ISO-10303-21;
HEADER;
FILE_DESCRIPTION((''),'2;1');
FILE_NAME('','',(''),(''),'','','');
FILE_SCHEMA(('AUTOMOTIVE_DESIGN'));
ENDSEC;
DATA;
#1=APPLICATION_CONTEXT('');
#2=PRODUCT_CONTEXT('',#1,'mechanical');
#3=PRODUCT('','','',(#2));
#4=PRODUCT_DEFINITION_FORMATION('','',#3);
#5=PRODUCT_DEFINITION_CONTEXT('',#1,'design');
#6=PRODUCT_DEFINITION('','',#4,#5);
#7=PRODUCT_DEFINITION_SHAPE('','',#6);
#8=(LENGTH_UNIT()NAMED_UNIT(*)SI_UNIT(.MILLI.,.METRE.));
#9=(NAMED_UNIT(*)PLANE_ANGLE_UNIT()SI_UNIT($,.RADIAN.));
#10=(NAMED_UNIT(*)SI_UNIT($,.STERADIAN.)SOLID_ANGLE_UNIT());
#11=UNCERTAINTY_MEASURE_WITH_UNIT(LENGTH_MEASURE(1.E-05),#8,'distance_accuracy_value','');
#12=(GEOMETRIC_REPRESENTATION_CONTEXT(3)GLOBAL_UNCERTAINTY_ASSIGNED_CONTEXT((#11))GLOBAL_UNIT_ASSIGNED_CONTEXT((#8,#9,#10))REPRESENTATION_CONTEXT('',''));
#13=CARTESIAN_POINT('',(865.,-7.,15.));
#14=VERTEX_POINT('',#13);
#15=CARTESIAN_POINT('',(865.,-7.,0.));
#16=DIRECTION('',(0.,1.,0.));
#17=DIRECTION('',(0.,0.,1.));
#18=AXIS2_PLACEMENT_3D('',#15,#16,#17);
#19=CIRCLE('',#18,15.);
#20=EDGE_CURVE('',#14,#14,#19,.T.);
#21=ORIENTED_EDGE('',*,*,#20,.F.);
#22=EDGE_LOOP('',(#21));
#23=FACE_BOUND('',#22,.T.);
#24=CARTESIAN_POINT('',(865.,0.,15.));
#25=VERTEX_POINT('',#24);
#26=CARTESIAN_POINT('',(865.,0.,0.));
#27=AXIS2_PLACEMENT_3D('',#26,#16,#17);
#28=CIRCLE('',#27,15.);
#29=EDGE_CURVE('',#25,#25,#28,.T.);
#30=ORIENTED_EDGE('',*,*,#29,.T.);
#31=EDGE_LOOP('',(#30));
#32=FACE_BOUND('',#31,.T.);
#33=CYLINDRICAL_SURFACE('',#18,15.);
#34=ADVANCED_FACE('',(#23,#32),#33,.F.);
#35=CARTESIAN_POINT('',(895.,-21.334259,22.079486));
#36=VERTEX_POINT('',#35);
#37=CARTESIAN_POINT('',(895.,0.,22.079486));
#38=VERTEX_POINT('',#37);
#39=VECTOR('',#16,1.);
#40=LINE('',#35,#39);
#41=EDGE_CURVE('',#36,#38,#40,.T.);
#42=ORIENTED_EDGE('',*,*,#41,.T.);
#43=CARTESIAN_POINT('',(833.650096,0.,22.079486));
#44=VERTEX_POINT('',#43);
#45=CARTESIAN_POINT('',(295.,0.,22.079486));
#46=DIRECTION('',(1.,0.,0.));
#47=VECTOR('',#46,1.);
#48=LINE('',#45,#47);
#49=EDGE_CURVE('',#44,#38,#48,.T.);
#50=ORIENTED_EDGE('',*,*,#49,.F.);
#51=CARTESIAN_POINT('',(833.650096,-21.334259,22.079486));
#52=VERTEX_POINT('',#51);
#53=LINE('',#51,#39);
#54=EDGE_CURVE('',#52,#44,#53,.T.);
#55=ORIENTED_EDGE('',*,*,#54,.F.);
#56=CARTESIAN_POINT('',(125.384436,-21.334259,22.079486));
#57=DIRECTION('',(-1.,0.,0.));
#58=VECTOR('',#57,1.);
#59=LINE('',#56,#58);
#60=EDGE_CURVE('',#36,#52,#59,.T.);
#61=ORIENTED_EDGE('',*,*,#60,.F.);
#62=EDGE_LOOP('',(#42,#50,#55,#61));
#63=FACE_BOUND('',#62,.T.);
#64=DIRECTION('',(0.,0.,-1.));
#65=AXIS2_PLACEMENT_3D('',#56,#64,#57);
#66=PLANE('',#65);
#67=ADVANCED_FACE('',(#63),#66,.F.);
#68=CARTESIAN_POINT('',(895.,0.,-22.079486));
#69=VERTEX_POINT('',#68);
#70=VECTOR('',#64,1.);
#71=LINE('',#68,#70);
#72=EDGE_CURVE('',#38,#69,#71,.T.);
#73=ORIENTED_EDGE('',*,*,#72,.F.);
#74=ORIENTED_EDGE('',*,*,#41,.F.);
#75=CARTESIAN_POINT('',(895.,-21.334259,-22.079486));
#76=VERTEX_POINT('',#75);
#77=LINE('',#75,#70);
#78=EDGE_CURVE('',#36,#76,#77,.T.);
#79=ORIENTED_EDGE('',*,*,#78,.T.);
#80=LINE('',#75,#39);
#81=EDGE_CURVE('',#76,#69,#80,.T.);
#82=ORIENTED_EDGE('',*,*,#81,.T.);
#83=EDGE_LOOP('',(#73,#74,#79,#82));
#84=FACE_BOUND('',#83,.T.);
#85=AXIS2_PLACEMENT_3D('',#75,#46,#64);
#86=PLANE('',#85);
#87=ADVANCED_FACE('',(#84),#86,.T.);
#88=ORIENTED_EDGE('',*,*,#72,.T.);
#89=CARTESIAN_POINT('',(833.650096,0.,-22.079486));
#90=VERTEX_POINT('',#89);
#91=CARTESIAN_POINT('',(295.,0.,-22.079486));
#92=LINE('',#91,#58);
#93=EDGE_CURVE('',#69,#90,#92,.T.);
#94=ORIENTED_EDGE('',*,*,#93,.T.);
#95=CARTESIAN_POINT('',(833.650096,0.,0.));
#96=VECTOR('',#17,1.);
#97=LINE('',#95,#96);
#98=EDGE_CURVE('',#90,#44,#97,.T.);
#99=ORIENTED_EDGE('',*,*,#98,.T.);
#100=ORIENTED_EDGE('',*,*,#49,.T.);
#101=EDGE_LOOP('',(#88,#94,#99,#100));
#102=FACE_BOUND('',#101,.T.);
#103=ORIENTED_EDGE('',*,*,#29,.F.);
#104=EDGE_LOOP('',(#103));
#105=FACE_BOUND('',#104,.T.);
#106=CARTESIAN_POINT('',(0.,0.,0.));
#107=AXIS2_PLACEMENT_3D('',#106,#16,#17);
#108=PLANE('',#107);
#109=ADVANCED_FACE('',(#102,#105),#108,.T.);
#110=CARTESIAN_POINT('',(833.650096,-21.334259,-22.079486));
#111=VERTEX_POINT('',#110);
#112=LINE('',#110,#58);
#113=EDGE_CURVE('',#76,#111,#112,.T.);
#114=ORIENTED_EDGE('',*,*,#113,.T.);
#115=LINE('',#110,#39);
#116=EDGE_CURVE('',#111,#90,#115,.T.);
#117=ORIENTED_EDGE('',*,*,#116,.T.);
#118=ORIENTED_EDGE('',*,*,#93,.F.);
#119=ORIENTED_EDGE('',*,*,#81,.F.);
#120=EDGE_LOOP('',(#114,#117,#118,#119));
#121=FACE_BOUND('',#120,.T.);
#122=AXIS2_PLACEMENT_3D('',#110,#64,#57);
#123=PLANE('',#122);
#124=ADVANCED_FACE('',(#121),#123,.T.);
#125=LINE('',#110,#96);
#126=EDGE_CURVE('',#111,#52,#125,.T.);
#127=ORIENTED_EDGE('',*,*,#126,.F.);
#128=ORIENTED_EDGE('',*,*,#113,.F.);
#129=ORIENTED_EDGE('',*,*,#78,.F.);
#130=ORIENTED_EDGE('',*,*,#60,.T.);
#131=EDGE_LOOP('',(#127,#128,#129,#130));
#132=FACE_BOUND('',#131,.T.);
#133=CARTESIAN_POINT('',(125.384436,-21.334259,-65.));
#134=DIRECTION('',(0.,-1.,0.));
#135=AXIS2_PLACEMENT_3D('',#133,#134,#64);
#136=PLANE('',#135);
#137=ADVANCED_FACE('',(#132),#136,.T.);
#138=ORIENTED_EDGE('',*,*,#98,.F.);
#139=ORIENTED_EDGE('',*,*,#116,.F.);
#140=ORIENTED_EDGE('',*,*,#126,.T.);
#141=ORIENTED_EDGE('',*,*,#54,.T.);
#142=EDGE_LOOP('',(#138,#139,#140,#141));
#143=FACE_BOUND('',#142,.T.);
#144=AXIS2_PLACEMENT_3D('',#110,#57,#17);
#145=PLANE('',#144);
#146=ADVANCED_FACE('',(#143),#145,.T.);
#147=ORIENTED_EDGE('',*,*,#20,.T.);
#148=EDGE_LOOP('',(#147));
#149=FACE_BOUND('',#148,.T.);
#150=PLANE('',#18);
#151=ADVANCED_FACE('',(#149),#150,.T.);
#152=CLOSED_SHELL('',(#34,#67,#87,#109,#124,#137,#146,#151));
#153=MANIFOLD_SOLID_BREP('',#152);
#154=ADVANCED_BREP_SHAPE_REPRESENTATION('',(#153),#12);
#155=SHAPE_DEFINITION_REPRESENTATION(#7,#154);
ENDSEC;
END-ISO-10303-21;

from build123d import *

# Parameters (mm, degrees)
CUT_EXTRUDE7_DEPTH               = 1010.950493836
CUT_EXTRUDE7_DEPTH_BACK          = 1010.950493836
SKETCH13_W                       = 48.176434887
SKETCH13_H                       = 155.804640487
SKETCH4_W                        = 600
SKETCH4_H                        = 44.158972604
CUT_EXTRUDE2_DEPTH               = 1010.950493836
SKETCH7_W                        = 159.807953253
SKETCH7_H                        = 69.49104999
BOSS_EXTRUDE7_DEPTH              = 5
FILLET5_R                        = 10
F_5_8_0_625_DIAMETER_HOLE1_D     = 15.875
F_5_8_0_625_DIAMETER_HOLE1_DEPTH = 30
F_5_8_0_625_DIAMETER_HOLE1_TIP   = 4.769331164
BOSS_EXTRUDE8_DEPTH              = 10
BOSS_EXTRUDE8_DEPTH_BACK         = 10
SKETCH16_W                       = 57.403477863
SKETCH16_H                       = 23.203595883
SKETCH17_W                       = 38.256761469
SKETCH17_H                       = 12.64819079
BOSS_EXTRUDE9_DEPTH              = 10
SKETCH18_W                       = 120
SKETCH18_H                       = 104.74536306
CUT_EXTRUDE8_DEPTH               = 161
FILLET6_R                        = 10
SKETCH19_R                       = 15
CUT_EXTRUDE9_DEPTH               = 7
CUT_EXTRUDE11_DEPTH              = 1010.950493856
CUT_EXTRUDE11_DEPTH_BACK         = 1010.950493856
SKETCH22_W                       = 1481.455902665
SKETCH22_H                       = 524.99926461
SKETCH22_W_2                     = 774.615564444
SKETCH22_H_2                     = 130
SKETCH23_W                       = 1033.221047575
SKETCH23_H                       = 313.410359552
SKETCH23_W_2                     = 790.959514037
SKETCH23_H_2                     = 163.499719248
CUT_EXTRUDE12_DEPTH              = 915.822387207
CUT_EXTRUDE13_DEPTH              = 908.868382599
CUT_EXTRUDE13_DEPTH_BACK         = 908.868382599
SKETCH24_W                       = 774.615564444
SKETCH24_H                       = 42.920513698
CUT_EXTRUDE14_DEPTH              = 908.868382607
CUT_EXTRUDE14_DEPTH_BACK         = 908.868382607
SKETCH25_W                       = 913.785959768
SKETCH25_H                       = 329.26502352
SKETCH25_W_2                     = 61.349903791
SKETCH25_H_2                     = 44.158972604


# Read off the part's stored shape, not the designer's step: Revolve1
with BuildPart() as part:
    # Revolve1 outline → Revolve1 (revolve)
    with BuildSketch(Plane.YX):
        with BuildLine():
            Line((0, 1000), (0, 0))
            ThreePointArc((0, 0), (70.710678154, 29.289321917), (100, 100.0000001))
            Line((100, 100.0000001), (100, 899.9999999))
            ThreePointArc((100, 899.9999999), (70.710678154, 970.710678083), (0, 1000))
        make_face()
    revolve(axis=Axis((0, 0, 0), (1, 0, 0)))

    # Sketch13 → Cut-Extrude7 (cut, two sides: drawn at the far end of the back side and taken through both)
    with BuildSketch(Plane(origin=(0, 0, 0), x_dir=(1, 0, 0), z_dir=(0, 1, 0)).offset(-CUT_EXTRUDE7_DEPTH_BACK)):
        with Locations((5.911782557, -3.075091589)):
            Rectangle(SKETCH13_W, SKETCH13_H)
    extrude(amount=CUT_EXTRUDE7_DEPTH + CUT_EXTRUDE7_DEPTH_BACK, mode=Mode.SUBTRACT)

    # Sketch4 → Cut-Extrude2 (cut, through all)
    with BuildSketch(Plane(origin=(0, 0, 0), x_dir=(1, 0, 0), z_dir=(0, 1, 0))):
        with Locations((595, 0)):
            Rectangle(SKETCH4_W, SKETCH4_H)
    extrude(amount=CUT_EXTRUDE2_DEPTH, mode=Mode.SUBTRACT)

    # Sketch7 → Boss-Extrude7 (add)
    with BuildSketch(Plane(origin=(0, 0, 0), x_dir=(1, 0, 0), z_dir=(0, 1, 0))):
        with Locations((745.885521462, -1.405844332)):
            Rectangle(SKETCH7_W, SKETCH7_H)
    extrude(amount=-BOSS_EXTRUDE7_DEPTH)

    # Fillet5
    fillet5_edges = [part.edges().sort_by_distance(p)[0] for p in [
        (30, -71.414284286, 0),
    ]]
    fillet(fillet5_edges, radius=FILLET5_R)

    # 5/8 (0.625) Diameter Hole1
    with Locations(Plane.ZY.offset(-30)):
        with Locations((0, 0)):
            Hole(F_5_8_0_625_DIAMETER_HOLE1_D / 2, depth=F_5_8_0_625_DIAMETER_HOLE1_DEPTH)
            with Locations((0, 0, -(F_5_8_0_625_DIAMETER_HOLE1_DEPTH + F_5_8_0_625_DIAMETER_HOLE1_TIP / 2))):  # 118° drill point
                Cone(0, F_5_8_0_625_DIAMETER_HOLE1_D / 2, F_5_8_0_625_DIAMETER_HOLE1_TIP, mode=Mode.SUBTRACT)

    # Sketch16 → Boss-Extrude8 (add, two sides: drawn at the far end of the back side and taken through both)
    with BuildSketch(Plane.XY.offset(-BOSS_EXTRUDE8_DEPTH_BACK)):
        with Locations((738.294537666, -11.601797942)):
            Rectangle(SKETCH16_W, SKETCH16_H)
    extrude(amount=BOSS_EXTRUDE8_DEPTH + BOSS_EXTRUDE8_DEPTH_BACK)

    # Sketch17 → Boss-Extrude9 (add)
    with BuildSketch(Plane.XY.offset(-22.079486302)):
        with Locations((787.071835847, 6.324095395)):
            Rectangle(SKETCH17_W, SKETCH17_H)
    extrude(amount=-BOSS_EXTRUDE9_DEPTH)

    # Sketch18 → Cut-Extrude8 (cut)
    with BuildSketch(Plane(origin=(0, 0, 0), x_dir=(1, 0, 0), z_dir=(0, 1, 0))):
        with Locations((204.992275313, 0)):
            Rectangle(SKETCH18_W, SKETCH18_H)
    extrude(amount=CUT_EXTRUDE8_DEPTH, mode=Mode.SUBTRACT)

    # Fillet6
    fillet6_edges = [part.edges().sort_by_distance(p)[0] for p in [
        (144.992275313, 42.594313674, -52.37268153),
        (144.992275313, 42.594313674, 52.37268153),
        (264.992275313, 42.594313674, 52.37268153),
        (264.992275313, 42.594313674, -52.37268153),
    ]]
    fillet(fillet6_edges, radius=FILLET6_R)

    # Sketch19 → Cut-Extrude9 (cut)
    with BuildSketch(Plane(origin=(0, 0, 0), x_dir=(1, 0, 0), z_dir=(0, 1, 0))):
        with Locations(Location((865, 0, 0), (0, 0, 270))):
            Circle(SKETCH19_R)
    extrude(amount=-CUT_EXTRUDE9_DEPTH, mode=Mode.SUBTRACT)

    # Sketch22 → Cut-Extrude11 (cut, two sides: drawn at the far end of the back side and taken through both)
    with BuildSketch(Plane(origin=(0, 0, 0), x_dir=(1, 0, 0), z_dir=(0, 1, 0)).offset(-CUT_EXTRUDE11_DEPTH_BACK)):
        with Locations((406.155110175, 0)):
            Rectangle(SKETCH22_W, SKETCH22_H)
        with Locations((512.692217778, 0)):
            Rectangle(SKETCH22_W_2, SKETCH22_H_2, mode=Mode.SUBTRACT)
    extrude(amount=CUT_EXTRUDE11_DEPTH + CUT_EXTRUDE11_DEPTH_BACK, mode=Mode.SUBTRACT)

    # Sketch23 → Cut-Extrude12 (cut, through all)
    with BuildSketch(Plane.XY.offset(65)):
        with Locations((481.89787613, -1.932796335)):
            Rectangle(SKETCH23_W, SKETCH23_H)
        with Locations((520.864192575, 60.415600646)):
            Rectangle(SKETCH23_W_2, SKETCH23_H_2, mode=Mode.SUBTRACT)
    extrude(amount=-CUT_EXTRUDE12_DEPTH, mode=Mode.SUBTRACT)

    # Sketch24 → Cut-Extrude13 (cut, two sides: drawn at the far end of the back side and taken through both)
    with BuildSketch(Plane(origin=(0, 0, 0), x_dir=(1, 0, 0), z_dir=(0, 1, 0)).offset(-CUT_EXTRUDE13_DEPTH_BACK)):
        with Locations((512.692217778, -43.539743151)):
            Rectangle(SKETCH24_W, SKETCH24_H)
    extrude(amount=CUT_EXTRUDE13_DEPTH + CUT_EXTRUDE13_DEPTH_BACK, mode=Mode.SUBTRACT)

    # Sketch25 → Cut-Extrude14 (cut, two sides: drawn at the far end of the back side and taken through both)
    with BuildSketch(Plane(origin=(0, 0, 0), x_dir=(1, 0, 0), z_dir=(0, 1, 0)).offset(-CUT_EXTRUDE14_DEPTH_BACK)):
        with Locations((557.248723254, -2.517184657)):
            Rectangle(SKETCH25_W, SKETCH25_H)
        with Locations((864.325048104, 0)):
            Rectangle(SKETCH25_W_2, SKETCH25_H_2, mode=Mode.SUBTRACT)
    extrude(amount=CUT_EXTRUDE14_DEPTH + CUT_EXTRUDE14_DEPTH_BACK, mode=Mode.SUBTRACT)


solid = part.part
